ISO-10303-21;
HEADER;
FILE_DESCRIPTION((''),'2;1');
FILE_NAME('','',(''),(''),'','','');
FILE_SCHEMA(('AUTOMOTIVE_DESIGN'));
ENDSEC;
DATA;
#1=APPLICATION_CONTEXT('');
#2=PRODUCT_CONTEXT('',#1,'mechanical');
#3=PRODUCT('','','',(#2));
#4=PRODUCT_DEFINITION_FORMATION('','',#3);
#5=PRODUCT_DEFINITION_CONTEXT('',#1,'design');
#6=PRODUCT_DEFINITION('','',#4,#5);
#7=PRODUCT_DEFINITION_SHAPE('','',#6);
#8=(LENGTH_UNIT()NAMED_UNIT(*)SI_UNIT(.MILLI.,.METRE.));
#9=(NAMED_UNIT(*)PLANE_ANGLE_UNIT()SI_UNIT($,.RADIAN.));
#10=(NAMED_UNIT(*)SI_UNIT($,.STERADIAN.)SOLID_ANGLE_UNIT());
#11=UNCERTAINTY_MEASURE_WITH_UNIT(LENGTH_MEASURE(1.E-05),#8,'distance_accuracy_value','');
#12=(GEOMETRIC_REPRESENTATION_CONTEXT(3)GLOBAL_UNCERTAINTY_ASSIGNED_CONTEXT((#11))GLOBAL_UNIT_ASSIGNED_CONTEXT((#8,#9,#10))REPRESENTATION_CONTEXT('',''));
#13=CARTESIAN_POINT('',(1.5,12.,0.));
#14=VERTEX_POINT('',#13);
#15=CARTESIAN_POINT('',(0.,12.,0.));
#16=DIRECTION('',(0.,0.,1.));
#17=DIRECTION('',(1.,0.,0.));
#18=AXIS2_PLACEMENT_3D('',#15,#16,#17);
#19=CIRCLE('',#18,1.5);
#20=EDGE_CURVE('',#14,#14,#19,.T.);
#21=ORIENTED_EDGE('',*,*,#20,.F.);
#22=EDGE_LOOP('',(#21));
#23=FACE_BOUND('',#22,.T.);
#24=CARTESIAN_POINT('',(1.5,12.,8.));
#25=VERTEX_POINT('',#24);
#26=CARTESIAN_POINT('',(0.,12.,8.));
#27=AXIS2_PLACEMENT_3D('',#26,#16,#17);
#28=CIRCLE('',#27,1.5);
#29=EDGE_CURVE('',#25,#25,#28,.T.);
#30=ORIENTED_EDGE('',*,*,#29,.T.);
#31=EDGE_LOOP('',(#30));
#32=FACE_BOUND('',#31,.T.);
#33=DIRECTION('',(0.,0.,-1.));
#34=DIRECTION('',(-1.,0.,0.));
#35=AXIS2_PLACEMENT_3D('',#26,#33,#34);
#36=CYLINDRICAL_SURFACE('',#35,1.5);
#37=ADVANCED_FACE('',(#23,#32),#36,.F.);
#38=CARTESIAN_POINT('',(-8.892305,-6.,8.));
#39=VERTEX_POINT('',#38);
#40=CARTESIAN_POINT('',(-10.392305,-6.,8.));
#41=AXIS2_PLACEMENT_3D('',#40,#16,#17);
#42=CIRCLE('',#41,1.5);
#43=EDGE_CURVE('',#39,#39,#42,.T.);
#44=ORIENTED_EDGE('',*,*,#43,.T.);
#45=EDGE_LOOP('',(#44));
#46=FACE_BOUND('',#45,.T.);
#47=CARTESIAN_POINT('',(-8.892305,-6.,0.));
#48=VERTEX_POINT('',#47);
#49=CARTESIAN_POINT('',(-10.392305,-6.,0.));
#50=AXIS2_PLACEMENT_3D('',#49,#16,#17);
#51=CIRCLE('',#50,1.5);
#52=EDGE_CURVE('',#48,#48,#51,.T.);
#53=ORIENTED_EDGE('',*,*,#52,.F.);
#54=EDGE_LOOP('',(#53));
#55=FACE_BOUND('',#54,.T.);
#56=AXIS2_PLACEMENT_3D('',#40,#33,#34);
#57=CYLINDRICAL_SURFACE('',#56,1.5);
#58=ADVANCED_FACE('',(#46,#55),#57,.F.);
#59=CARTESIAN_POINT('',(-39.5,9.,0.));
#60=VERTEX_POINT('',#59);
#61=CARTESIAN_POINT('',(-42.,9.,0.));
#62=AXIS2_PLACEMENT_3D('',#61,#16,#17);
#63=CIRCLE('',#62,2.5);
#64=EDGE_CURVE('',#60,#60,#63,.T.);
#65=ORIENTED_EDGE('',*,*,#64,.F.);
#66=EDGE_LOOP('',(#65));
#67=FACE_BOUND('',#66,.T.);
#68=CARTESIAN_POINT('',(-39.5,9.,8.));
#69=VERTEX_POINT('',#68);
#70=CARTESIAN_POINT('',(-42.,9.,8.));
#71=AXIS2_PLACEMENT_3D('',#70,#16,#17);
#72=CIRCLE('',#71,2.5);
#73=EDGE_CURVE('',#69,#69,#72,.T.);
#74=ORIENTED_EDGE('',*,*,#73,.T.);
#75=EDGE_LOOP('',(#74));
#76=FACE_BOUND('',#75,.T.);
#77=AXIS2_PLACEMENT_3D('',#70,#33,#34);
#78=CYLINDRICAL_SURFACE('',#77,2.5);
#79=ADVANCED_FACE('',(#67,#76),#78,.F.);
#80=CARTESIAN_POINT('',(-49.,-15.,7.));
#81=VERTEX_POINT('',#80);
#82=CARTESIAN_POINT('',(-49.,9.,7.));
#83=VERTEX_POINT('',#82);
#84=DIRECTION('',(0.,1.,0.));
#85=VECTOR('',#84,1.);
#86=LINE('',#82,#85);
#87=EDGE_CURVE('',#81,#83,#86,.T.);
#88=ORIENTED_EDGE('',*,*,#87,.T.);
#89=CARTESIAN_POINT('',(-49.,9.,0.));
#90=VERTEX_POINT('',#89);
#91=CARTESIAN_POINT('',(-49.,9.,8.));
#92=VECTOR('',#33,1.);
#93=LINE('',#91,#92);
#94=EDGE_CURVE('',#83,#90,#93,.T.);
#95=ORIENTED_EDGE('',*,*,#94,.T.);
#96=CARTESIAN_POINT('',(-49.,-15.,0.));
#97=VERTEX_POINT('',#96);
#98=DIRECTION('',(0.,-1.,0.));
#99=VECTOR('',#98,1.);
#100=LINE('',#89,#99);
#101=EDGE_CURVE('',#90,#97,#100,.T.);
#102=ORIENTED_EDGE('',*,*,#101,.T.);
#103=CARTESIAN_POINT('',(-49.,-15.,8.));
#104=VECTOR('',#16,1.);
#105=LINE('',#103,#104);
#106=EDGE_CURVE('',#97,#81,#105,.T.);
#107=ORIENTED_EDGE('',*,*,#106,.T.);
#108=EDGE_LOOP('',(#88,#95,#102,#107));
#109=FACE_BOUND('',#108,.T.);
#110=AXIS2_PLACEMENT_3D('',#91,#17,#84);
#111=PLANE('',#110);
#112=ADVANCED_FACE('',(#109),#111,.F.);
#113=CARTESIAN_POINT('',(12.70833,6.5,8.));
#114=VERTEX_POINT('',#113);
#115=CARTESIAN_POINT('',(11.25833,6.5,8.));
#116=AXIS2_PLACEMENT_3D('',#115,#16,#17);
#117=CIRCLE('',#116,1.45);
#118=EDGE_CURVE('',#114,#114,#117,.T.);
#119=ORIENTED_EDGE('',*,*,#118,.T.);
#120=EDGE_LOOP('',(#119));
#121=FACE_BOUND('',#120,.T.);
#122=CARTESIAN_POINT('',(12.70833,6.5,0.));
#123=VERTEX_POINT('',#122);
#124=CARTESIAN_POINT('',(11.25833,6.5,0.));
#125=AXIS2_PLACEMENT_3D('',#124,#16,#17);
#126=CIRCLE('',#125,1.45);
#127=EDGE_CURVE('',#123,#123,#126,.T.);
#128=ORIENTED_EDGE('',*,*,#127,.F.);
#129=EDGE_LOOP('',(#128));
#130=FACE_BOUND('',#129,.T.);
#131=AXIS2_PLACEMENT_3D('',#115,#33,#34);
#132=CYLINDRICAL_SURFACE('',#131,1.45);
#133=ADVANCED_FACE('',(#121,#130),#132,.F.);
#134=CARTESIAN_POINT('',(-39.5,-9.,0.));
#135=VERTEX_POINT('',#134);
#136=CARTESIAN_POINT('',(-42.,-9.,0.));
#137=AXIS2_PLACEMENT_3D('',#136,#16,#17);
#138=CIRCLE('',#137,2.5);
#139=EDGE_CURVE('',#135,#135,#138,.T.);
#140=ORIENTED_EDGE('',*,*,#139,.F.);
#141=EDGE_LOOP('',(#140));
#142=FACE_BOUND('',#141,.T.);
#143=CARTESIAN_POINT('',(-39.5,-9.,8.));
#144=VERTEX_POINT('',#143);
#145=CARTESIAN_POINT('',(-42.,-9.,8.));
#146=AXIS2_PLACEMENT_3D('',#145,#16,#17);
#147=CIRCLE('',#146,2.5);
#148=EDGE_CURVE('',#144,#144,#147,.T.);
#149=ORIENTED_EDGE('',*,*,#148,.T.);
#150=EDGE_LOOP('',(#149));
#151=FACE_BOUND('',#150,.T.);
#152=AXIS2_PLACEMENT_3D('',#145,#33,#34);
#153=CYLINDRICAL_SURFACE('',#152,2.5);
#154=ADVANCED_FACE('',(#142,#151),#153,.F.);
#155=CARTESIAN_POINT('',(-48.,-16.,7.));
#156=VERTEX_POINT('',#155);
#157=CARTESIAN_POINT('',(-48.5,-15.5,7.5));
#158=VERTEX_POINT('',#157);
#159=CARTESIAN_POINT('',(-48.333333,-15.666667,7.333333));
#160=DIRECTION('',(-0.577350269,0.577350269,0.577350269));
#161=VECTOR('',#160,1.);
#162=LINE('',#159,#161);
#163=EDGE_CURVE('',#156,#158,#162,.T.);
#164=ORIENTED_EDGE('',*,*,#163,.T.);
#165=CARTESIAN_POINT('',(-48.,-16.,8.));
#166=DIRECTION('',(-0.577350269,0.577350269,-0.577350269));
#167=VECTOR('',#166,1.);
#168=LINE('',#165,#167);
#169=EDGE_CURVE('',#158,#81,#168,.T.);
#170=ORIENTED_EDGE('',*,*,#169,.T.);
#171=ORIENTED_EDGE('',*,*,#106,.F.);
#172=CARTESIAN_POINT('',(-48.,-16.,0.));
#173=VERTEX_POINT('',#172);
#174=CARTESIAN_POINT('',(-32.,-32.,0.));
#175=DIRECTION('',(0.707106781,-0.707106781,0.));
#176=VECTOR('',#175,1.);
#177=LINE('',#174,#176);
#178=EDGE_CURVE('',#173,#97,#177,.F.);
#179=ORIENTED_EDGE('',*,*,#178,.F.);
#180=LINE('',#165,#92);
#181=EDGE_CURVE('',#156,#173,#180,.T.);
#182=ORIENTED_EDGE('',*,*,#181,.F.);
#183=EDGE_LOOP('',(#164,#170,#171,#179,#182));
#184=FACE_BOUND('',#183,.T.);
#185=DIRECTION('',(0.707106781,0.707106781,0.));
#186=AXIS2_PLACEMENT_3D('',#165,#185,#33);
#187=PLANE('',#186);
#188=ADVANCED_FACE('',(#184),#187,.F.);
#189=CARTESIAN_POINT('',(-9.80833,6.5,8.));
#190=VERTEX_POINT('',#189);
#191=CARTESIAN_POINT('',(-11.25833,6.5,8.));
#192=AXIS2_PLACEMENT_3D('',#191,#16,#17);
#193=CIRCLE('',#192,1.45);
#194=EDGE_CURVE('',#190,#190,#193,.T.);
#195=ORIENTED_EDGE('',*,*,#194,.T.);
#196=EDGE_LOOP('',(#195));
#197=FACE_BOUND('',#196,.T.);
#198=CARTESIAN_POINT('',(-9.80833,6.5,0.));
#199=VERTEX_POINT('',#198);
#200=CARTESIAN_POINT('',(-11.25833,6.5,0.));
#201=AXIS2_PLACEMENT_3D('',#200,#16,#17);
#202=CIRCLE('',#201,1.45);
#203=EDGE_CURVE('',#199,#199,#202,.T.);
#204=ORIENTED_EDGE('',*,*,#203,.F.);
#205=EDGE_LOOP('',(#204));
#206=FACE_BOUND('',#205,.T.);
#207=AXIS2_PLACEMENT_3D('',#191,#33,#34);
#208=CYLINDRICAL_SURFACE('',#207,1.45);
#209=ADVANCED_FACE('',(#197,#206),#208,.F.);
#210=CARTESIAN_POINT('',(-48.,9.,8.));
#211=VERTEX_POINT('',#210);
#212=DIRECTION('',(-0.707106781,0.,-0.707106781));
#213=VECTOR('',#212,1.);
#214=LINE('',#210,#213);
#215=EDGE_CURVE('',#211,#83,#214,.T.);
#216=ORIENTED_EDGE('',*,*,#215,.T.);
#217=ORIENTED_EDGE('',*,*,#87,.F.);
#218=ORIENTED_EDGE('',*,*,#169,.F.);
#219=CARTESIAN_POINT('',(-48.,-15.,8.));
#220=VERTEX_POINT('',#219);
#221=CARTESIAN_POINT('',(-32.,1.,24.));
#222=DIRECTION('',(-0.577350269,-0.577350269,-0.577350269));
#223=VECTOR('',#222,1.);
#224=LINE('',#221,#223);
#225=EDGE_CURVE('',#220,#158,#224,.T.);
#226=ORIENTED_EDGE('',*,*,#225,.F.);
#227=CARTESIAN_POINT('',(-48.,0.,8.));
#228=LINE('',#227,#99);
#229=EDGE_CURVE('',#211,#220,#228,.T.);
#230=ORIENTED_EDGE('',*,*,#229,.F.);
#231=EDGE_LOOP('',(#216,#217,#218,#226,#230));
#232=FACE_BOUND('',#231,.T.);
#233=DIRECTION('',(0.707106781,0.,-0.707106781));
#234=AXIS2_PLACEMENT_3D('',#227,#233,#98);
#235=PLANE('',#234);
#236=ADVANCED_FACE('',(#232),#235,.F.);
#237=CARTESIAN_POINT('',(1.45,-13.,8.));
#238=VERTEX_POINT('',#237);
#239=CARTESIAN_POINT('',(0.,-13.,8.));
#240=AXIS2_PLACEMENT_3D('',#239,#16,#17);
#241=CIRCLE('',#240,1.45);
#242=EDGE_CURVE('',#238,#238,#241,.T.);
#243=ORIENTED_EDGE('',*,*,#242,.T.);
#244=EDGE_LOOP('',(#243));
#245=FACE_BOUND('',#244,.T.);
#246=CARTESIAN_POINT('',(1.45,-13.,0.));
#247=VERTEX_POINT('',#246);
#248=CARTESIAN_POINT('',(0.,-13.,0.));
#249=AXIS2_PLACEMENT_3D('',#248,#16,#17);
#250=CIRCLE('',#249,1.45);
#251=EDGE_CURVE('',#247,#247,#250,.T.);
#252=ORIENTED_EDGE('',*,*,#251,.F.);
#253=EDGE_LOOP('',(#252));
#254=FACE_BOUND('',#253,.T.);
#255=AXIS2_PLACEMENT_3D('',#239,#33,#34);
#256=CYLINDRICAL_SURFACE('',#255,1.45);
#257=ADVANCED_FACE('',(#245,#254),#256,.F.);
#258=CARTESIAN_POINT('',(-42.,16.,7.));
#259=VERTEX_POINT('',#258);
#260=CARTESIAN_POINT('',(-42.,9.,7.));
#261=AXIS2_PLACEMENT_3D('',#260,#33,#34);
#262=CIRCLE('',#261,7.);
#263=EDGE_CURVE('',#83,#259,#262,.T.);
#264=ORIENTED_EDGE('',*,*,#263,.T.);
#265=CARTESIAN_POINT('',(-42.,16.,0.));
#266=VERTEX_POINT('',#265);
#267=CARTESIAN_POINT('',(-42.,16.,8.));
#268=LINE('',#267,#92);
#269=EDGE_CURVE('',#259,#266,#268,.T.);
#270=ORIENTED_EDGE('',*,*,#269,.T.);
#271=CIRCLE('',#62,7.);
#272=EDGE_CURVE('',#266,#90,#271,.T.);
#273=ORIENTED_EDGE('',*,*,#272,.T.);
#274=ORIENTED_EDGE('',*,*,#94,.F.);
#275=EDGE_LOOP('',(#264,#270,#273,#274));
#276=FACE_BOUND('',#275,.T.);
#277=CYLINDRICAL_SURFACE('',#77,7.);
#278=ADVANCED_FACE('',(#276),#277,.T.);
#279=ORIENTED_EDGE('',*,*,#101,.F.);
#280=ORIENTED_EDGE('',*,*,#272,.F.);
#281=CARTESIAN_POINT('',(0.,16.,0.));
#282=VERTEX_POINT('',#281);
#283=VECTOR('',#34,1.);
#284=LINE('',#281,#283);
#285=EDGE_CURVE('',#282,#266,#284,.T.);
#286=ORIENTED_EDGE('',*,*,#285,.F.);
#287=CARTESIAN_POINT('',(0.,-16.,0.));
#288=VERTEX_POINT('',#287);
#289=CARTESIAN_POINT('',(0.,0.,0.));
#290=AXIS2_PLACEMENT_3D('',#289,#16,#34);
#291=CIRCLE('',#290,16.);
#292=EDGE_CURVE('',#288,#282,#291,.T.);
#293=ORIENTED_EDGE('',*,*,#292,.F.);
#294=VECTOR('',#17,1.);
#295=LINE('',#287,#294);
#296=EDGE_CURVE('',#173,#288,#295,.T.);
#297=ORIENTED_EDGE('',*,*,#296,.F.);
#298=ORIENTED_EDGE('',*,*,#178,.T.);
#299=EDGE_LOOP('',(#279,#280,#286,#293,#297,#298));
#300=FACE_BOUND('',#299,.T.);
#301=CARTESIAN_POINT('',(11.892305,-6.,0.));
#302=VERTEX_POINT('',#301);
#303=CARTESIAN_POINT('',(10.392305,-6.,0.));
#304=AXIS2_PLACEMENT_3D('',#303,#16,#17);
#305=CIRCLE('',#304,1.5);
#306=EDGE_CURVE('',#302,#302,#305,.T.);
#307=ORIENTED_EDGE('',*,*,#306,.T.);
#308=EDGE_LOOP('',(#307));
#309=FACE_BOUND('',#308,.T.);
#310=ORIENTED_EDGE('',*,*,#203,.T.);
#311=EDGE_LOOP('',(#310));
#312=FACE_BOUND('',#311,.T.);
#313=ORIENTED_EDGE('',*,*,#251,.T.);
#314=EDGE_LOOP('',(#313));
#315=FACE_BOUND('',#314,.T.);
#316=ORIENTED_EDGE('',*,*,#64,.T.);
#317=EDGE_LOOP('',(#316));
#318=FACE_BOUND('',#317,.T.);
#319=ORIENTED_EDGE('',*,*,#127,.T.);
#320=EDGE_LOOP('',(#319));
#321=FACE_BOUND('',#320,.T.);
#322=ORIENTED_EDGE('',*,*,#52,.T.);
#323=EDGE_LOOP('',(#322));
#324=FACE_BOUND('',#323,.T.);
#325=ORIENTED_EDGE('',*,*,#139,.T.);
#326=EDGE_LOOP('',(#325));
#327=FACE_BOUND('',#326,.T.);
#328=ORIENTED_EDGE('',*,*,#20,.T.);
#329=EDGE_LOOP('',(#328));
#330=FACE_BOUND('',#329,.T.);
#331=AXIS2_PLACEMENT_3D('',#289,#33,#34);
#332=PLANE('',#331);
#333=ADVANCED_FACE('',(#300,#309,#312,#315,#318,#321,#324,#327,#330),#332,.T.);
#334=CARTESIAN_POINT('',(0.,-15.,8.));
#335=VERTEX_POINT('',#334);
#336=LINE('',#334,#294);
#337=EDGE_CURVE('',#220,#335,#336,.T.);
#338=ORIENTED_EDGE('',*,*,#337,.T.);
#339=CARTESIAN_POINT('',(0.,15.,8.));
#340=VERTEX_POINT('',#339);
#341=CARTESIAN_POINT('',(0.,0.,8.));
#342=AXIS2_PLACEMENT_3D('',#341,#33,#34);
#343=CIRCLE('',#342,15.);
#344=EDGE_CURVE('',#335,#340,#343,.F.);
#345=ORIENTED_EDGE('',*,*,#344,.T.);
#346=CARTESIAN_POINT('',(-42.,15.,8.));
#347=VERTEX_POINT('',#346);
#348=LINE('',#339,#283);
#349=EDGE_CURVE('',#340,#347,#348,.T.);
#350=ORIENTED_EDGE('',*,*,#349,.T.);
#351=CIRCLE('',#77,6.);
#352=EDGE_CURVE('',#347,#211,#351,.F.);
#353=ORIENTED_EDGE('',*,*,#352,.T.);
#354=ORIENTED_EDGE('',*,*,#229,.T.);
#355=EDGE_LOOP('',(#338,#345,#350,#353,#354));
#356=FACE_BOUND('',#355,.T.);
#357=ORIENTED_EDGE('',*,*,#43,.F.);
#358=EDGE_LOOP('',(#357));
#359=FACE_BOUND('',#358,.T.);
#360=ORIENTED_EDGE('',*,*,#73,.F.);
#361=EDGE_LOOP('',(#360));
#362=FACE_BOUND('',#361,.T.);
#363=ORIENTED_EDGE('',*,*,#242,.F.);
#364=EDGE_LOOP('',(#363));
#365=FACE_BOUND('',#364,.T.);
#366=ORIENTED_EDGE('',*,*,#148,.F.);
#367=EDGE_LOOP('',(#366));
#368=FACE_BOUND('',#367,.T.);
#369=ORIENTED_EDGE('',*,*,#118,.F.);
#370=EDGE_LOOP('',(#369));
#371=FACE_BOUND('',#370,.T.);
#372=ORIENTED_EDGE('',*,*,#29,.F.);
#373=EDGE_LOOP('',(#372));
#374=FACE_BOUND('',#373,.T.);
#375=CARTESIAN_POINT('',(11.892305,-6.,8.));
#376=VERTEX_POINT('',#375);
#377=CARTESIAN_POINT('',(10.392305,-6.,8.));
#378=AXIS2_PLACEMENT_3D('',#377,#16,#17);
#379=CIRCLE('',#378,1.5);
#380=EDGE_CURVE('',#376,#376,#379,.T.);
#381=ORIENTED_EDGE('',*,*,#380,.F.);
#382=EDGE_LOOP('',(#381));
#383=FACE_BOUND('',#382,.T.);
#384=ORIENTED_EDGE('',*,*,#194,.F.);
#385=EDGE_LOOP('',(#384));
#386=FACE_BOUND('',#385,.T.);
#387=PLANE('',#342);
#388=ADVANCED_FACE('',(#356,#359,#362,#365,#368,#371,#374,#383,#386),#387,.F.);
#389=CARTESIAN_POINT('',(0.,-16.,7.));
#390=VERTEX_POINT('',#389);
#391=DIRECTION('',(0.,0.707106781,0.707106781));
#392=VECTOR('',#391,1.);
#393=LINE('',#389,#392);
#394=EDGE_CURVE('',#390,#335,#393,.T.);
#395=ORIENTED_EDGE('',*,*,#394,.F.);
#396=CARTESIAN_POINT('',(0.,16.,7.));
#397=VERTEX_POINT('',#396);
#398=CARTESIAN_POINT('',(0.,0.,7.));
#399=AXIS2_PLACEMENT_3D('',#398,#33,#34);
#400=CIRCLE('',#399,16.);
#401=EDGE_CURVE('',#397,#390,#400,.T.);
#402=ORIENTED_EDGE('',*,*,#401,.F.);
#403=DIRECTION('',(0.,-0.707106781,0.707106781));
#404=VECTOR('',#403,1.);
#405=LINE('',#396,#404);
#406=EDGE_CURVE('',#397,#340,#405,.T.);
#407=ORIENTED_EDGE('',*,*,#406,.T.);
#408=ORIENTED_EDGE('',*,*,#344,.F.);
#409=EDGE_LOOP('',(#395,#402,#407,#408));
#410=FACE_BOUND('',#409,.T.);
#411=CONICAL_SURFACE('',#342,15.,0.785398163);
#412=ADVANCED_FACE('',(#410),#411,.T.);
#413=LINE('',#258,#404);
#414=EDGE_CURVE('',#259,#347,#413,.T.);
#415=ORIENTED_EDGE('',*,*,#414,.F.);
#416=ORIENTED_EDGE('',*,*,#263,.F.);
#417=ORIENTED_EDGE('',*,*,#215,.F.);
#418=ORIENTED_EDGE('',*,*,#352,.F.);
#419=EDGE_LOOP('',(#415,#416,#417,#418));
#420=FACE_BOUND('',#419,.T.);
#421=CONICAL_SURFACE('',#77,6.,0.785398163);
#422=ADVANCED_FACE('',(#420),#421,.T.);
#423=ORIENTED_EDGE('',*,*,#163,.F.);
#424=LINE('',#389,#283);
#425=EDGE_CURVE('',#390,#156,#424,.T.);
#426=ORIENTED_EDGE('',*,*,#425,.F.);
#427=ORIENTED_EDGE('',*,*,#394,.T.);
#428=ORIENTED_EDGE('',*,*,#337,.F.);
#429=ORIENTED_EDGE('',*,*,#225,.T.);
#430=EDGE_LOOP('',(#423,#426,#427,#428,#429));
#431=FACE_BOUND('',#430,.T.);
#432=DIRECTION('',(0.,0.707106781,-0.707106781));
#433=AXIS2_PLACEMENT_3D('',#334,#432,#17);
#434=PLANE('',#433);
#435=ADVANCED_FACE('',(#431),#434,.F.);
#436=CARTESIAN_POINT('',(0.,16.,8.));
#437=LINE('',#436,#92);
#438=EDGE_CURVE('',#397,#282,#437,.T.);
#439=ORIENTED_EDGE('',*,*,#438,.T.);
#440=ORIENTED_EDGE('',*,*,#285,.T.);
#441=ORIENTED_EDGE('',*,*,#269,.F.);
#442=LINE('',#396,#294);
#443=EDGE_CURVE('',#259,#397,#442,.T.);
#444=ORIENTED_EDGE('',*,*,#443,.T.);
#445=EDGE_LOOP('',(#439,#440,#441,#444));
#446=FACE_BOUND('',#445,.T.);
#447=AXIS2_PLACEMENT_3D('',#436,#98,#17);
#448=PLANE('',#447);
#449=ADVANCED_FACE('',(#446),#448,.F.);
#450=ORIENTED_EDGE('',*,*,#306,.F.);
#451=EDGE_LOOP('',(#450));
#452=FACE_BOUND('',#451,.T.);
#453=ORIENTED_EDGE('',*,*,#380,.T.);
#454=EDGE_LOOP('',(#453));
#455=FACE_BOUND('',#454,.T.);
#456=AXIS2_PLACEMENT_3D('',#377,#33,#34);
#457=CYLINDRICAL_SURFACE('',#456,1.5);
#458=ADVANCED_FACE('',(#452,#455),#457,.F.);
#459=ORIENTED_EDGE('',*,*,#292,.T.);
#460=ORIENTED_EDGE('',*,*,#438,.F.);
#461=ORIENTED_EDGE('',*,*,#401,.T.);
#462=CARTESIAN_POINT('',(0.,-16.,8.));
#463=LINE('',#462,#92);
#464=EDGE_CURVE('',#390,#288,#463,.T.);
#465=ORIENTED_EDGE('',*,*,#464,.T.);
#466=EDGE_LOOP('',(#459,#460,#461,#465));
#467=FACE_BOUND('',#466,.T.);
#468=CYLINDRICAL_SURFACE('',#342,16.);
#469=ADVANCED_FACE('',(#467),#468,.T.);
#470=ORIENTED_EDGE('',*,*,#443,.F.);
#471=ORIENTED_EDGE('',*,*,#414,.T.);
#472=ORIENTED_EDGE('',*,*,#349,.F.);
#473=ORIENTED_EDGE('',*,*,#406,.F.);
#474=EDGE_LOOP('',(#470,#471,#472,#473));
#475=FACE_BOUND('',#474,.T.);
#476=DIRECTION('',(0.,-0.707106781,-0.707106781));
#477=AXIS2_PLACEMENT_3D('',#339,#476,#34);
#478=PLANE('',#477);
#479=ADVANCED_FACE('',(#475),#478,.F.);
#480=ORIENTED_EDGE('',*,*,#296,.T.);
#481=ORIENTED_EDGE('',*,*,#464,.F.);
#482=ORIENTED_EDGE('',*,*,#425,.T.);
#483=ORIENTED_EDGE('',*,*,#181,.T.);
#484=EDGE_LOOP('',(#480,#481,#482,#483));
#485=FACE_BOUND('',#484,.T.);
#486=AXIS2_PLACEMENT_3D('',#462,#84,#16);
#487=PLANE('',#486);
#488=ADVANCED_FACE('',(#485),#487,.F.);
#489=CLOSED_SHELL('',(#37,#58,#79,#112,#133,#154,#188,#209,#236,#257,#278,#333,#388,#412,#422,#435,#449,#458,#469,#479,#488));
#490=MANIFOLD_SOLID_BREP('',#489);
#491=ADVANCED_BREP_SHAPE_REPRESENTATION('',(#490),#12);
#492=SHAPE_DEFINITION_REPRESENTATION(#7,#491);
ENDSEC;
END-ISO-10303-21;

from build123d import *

# Parameters (mm, degrees)
SKETCH_1_R      = 1.45
SKETCH_1_R_2    = 1.5
SKETCH_1_R_3    = 2.5
EXTRUDE_1_DEPTH = 8
CHAMFER_1_SIZE  = 1
CHAMFER_2_SIZE  = 1


with BuildPart() as part:
    # 草图1 → 凸台-拉伸1 (new body)
    with BuildSketch(Plane.XY):
        with BuildLine():
            Line((0, 16), (-42, 16))
            ThreePointArc((-42, 16), (-46.949747468, 13.949747468), (-49, 9))
            Line((-49, 9), (-49, -16))
            Line((-49, -16), (0, -16))
            ThreePointArc((0, -16), (16, 0), (0, 16))
        make_face()
        with Locations((0, -13)):
            Circle(SKETCH_1_R, mode=Mode.SUBTRACT)
        with Locations((10.392304845, -6)):
            Circle(SKETCH_1_R_2, mode=Mode.SUBTRACT)
        with Locations((11.258330249, 6.5)):
            Circle(SKETCH_1_R, mode=Mode.SUBTRACT)
        with Locations((-10.392304845, -6)):
            Circle(SKETCH_1_R_2, mode=Mode.SUBTRACT)
        with Locations((-11.258330249, 6.5)):
            Circle(SKETCH_1_R, mode=Mode.SUBTRACT)
        with Locations((0, 12)):
            Circle(SKETCH_1_R_2, mode=Mode.SUBTRACT)
        with Locations((-42, 9)):
            Circle(SKETCH_1_R_3, mode=Mode.SUBTRACT)
        with Locations((-42, -9)):
            Circle(SKETCH_1_R_3, mode=Mode.SUBTRACT)
    extrude(amount=EXTRUDE_1_DEPTH)

    # 倒角1
    chamfer_1_edges = [part.edges().sort_by_distance(p)[0] for p in [
        (-49, -16, 4),
    ]]
    chamfer(chamfer_1_edges, length=CHAMFER_1_SIZE)

    # 倒角2
    # the kernel refuses this chamfer: 1 mm, written as the material it takes off along each edge
    with BuildSketch(Plane(origin=(-50.571682988, -16, 8), x_dir=(0, 0.9996219169112968, 0.027495876610585647), z_dir=(1, 0, 0))) as chamfer_2_piece_1:
        Polygon((CHAMFER_2_SIZE * 0.999621916911, -CHAMFER_2_SIZE * 0.0274958766106), (-CHAMFER_2_SIZE * 0.0274958766106, -CHAMFER_2_SIZE * 0.999621916911), (0, 0), align=None)
    extrude(amount=50.571682988, mode=Mode.SUBTRACT)
    with BuildSketch(Plane(origin=(-49, 9, 8), x_dir=(-0.02749587661058907, 0, -0.9996219169112965), z_dir=(0, -1, 0))) as chamfer_2_piece_2:
        Polygon((CHAMFER_2_SIZE * 0.999621916911, CHAMFER_2_SIZE * 0.0274958766106), (-CHAMFER_2_SIZE * 0.0274958766106, CHAMFER_2_SIZE * 0.999621916911), (0, 0), align=None)
    extrude(amount=26.571682988, mode=Mode.SUBTRACT)
    with BuildSketch(Plane(origin=(0, 0, 8), x_dir=(0, -1, 0), z_dir=(-1, 0, 0))) as chamfer_2_piece_3:
        Polygon((16 - CHAMFER_2_SIZE, 0), (16, -CHAMFER_2_SIZE), (16, 0), align=None)
    revolve(axis=Axis((0, 0, 8), (0, 0, 1)), revolution_arc=180, mode=Mode.SUBTRACT)
    with BuildSketch(Plane(origin=(-42, 9, 8), x_dir=(0, 1, 0), z_dir=(1, 0, 0))) as chamfer_2_piece_4:
        Polygon((7, -CHAMFER_2_SIZE), (7 - CHAMFER_2_SIZE, 0), (7, 0), align=None)
    revolve(axis=Axis((-42, 9, 8), (0, 0, 1)), revolution_arc=90, mode=Mode.SUBTRACT)
    with BuildSketch(Plane(origin=(0, 16, 8), x_dir=(0, -0.9996219169112968, 0.027495876610585647), z_dir=(-1, 0, 0))) as chamfer_2_piece_5:
        Polygon((CHAMFER_2_SIZE * 0.999621916911, -CHAMFER_2_SIZE * 0.0274958766106), (-CHAMFER_2_SIZE * 0.0274958766106, -CHAMFER_2_SIZE * 0.999621916911), (0, 0), align=None)
    extrude(amount=42, mode=Mode.SUBTRACT)


solid = part.part
